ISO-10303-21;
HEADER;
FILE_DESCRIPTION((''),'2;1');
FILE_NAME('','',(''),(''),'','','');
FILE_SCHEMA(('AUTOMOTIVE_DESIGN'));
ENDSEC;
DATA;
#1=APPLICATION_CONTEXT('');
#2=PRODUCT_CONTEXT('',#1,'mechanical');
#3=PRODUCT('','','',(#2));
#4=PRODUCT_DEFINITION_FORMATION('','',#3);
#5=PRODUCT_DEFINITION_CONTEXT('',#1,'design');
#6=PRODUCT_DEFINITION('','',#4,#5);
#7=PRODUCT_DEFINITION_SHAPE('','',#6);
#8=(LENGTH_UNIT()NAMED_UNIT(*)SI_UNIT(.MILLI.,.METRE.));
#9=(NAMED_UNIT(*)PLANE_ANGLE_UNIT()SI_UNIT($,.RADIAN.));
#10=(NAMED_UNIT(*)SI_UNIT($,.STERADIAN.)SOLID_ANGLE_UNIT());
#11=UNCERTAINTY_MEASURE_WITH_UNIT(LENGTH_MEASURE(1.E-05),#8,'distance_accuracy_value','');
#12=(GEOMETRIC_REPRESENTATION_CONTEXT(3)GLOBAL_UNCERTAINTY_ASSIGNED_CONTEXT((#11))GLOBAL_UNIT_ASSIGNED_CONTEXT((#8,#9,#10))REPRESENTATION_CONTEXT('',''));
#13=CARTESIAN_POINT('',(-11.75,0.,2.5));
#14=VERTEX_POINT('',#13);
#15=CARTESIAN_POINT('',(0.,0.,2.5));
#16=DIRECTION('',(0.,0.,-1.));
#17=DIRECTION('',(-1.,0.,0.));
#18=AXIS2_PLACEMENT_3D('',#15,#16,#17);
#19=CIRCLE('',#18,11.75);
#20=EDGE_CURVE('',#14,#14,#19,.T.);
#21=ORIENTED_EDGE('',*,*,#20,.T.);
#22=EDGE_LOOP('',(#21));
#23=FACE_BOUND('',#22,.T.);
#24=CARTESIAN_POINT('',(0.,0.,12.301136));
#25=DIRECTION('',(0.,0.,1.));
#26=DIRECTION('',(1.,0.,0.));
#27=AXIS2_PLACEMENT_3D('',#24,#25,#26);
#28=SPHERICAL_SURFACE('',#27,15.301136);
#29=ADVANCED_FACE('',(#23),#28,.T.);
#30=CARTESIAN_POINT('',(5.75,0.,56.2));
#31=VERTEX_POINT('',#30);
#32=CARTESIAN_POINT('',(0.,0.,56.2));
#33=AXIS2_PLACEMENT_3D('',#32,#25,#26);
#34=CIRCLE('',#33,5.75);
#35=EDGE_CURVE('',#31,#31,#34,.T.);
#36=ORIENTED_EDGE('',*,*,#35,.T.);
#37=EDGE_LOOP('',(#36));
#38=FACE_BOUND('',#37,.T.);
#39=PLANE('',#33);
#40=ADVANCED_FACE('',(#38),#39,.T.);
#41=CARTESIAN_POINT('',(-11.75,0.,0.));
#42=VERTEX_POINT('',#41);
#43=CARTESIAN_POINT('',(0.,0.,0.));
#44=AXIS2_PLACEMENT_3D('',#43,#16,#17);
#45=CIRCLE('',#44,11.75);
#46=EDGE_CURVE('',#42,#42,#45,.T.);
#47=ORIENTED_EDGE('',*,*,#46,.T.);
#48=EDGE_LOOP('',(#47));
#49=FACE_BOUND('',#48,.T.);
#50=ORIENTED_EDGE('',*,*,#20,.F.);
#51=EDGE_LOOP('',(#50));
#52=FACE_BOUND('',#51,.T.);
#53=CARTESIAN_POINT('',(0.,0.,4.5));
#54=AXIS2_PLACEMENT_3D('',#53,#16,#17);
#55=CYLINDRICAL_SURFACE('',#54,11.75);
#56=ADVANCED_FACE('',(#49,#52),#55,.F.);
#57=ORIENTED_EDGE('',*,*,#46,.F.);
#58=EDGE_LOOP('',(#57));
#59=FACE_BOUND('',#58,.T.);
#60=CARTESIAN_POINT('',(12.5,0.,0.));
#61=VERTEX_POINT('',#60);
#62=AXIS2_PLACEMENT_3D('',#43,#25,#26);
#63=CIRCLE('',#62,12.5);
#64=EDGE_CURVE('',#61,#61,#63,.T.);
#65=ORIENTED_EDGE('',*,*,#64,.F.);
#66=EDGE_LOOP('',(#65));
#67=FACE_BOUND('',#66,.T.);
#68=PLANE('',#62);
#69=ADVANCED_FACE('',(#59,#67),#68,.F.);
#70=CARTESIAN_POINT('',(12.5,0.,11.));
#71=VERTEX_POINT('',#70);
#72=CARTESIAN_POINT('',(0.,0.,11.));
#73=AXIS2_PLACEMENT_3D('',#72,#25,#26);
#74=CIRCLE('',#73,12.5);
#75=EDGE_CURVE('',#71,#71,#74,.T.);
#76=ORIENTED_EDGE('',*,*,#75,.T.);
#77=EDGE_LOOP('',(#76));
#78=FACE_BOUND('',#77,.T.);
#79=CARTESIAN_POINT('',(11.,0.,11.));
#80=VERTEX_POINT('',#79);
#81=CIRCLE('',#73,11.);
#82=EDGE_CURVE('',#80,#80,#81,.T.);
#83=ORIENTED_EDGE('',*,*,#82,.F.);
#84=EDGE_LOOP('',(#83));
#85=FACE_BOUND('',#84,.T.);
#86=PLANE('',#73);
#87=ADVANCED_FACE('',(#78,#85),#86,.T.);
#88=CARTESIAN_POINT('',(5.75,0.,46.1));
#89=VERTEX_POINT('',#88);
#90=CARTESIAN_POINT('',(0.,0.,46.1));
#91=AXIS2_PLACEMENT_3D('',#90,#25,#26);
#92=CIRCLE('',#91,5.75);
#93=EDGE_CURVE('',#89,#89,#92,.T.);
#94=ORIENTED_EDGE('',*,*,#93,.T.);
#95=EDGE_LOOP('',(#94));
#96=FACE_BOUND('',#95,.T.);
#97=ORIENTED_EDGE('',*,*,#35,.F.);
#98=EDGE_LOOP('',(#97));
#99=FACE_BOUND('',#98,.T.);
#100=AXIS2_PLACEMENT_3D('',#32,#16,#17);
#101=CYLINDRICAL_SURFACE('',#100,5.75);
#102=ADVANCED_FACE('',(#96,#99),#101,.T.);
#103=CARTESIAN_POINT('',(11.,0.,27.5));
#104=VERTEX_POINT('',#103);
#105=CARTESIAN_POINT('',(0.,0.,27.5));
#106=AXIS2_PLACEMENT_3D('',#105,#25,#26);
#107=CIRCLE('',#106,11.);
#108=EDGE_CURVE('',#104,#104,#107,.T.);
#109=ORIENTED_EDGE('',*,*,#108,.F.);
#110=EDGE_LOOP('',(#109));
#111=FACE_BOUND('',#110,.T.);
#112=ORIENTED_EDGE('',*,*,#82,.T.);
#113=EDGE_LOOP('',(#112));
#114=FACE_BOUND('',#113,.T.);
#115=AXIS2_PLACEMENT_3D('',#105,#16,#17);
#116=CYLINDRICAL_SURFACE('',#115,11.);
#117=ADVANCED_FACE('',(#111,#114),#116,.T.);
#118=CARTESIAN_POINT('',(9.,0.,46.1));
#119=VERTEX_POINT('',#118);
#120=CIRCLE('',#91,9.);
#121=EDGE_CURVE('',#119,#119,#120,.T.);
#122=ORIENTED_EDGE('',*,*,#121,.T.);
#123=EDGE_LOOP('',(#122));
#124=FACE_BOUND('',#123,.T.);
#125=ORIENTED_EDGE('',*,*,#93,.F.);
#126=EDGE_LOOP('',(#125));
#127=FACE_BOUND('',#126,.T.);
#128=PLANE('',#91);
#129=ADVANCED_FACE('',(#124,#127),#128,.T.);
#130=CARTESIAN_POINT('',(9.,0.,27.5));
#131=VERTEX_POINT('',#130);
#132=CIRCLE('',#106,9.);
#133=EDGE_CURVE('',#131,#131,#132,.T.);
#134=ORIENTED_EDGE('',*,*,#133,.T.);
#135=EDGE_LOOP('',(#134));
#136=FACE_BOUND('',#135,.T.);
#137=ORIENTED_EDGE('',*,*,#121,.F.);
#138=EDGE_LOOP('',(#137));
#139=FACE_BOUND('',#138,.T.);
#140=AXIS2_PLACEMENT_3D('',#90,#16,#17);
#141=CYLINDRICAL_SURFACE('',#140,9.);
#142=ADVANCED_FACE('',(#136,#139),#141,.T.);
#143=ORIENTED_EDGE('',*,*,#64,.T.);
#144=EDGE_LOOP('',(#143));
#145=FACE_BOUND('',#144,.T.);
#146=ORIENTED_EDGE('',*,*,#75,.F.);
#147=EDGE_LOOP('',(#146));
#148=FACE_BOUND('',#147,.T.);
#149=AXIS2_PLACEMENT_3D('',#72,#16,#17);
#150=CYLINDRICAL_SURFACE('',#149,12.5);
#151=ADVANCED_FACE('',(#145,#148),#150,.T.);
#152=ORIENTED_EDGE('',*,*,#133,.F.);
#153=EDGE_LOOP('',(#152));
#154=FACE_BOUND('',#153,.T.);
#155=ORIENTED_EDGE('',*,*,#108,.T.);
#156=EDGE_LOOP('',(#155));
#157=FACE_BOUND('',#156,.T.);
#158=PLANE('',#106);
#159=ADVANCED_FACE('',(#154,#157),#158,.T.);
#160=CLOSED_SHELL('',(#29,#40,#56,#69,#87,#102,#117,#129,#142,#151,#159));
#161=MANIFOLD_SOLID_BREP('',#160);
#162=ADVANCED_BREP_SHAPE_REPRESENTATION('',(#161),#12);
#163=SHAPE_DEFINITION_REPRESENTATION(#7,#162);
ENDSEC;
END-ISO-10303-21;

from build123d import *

# Parameters (mm, degrees)
SKETCH1_R           = 12.5
BOSS_EXTRUDE1_DEPTH = 11
SKETCH2_R           = 11
BOSS_EXTRUDE2_DEPTH = 16.5
SKETCH3_R           = 9
BOSS_EXTRUDE3_DEPTH = 18.6
SKETCH4_R           = 5.75
BOSS_EXTRUDE4_DEPTH = 10.1
SKETCH5_R           = 11.75
CUT_EXTRUDE1_DEPTH  = 4.5
BOSS_EXTRUDE5_START = 2
SKETCH6_R           = 11.75
BOSS_EXTRUDE5_DEPTH = 2


# Read off the part's stored shape, not the designer's step: Dome1
with BuildPart() as part:
    # Sketch1 → Boss-Extrude1 (new body)
    with BuildSketch(Plane.XY):
        Circle(SKETCH1_R)
    extrude(amount=BOSS_EXTRUDE1_DEPTH)

    # Sketch2 → Boss-Extrude2 (add)
    with BuildSketch(Plane.XY.offset(11)):
        Circle(SKETCH2_R)
    extrude(amount=BOSS_EXTRUDE2_DEPTH)

    # Sketch3 → Boss-Extrude3 (add)
    with BuildSketch(Plane.XY.offset(27.5)):
        Circle(SKETCH3_R)
    extrude(amount=BOSS_EXTRUDE3_DEPTH)

    # Sketch4 → Boss-Extrude4 (add)
    with BuildSketch(Plane.XY.offset(46.1)):
        Circle(SKETCH4_R)
    extrude(amount=BOSS_EXTRUDE4_DEPTH)

    # Sketch5 → Cut-Extrude1 (cut)
    with BuildSketch(Plane(origin=(0, 0, 0), x_dir=(-1, 0, 0), z_dir=(0, 0, -1))):
        Circle(SKETCH5_R)
    extrude(amount=-CUT_EXTRUDE1_DEPTH, mode=Mode.SUBTRACT)

    # Sketch6 → Boss-Extrude5 (add)
    with BuildSketch(Plane(origin=(0, 0, 4.5), x_dir=(-1, 0, 0), z_dir=(0, 0, -1)).offset(BOSS_EXTRUDE5_START)):
        Circle(SKETCH6_R)
    extrude(amount=-BOSS_EXTRUDE5_DEPTH)

    # Dome1 outline → Dome1 (revolve)
    with BuildSketch(Plane.XZ):
        with BuildLine():
            Line((0, 2.500000012), (0, -3))
            ThreePointArc((0, -3), (6.48676538, -1.556953293), (11.75000001, 2.500000012))
            Line((11.75000001, 2.500000012), (0, 2.500000012))
        make_face()
    revolve(axis=Axis((0, 0, 0), (0, 0, 1)))


solid = part.part
